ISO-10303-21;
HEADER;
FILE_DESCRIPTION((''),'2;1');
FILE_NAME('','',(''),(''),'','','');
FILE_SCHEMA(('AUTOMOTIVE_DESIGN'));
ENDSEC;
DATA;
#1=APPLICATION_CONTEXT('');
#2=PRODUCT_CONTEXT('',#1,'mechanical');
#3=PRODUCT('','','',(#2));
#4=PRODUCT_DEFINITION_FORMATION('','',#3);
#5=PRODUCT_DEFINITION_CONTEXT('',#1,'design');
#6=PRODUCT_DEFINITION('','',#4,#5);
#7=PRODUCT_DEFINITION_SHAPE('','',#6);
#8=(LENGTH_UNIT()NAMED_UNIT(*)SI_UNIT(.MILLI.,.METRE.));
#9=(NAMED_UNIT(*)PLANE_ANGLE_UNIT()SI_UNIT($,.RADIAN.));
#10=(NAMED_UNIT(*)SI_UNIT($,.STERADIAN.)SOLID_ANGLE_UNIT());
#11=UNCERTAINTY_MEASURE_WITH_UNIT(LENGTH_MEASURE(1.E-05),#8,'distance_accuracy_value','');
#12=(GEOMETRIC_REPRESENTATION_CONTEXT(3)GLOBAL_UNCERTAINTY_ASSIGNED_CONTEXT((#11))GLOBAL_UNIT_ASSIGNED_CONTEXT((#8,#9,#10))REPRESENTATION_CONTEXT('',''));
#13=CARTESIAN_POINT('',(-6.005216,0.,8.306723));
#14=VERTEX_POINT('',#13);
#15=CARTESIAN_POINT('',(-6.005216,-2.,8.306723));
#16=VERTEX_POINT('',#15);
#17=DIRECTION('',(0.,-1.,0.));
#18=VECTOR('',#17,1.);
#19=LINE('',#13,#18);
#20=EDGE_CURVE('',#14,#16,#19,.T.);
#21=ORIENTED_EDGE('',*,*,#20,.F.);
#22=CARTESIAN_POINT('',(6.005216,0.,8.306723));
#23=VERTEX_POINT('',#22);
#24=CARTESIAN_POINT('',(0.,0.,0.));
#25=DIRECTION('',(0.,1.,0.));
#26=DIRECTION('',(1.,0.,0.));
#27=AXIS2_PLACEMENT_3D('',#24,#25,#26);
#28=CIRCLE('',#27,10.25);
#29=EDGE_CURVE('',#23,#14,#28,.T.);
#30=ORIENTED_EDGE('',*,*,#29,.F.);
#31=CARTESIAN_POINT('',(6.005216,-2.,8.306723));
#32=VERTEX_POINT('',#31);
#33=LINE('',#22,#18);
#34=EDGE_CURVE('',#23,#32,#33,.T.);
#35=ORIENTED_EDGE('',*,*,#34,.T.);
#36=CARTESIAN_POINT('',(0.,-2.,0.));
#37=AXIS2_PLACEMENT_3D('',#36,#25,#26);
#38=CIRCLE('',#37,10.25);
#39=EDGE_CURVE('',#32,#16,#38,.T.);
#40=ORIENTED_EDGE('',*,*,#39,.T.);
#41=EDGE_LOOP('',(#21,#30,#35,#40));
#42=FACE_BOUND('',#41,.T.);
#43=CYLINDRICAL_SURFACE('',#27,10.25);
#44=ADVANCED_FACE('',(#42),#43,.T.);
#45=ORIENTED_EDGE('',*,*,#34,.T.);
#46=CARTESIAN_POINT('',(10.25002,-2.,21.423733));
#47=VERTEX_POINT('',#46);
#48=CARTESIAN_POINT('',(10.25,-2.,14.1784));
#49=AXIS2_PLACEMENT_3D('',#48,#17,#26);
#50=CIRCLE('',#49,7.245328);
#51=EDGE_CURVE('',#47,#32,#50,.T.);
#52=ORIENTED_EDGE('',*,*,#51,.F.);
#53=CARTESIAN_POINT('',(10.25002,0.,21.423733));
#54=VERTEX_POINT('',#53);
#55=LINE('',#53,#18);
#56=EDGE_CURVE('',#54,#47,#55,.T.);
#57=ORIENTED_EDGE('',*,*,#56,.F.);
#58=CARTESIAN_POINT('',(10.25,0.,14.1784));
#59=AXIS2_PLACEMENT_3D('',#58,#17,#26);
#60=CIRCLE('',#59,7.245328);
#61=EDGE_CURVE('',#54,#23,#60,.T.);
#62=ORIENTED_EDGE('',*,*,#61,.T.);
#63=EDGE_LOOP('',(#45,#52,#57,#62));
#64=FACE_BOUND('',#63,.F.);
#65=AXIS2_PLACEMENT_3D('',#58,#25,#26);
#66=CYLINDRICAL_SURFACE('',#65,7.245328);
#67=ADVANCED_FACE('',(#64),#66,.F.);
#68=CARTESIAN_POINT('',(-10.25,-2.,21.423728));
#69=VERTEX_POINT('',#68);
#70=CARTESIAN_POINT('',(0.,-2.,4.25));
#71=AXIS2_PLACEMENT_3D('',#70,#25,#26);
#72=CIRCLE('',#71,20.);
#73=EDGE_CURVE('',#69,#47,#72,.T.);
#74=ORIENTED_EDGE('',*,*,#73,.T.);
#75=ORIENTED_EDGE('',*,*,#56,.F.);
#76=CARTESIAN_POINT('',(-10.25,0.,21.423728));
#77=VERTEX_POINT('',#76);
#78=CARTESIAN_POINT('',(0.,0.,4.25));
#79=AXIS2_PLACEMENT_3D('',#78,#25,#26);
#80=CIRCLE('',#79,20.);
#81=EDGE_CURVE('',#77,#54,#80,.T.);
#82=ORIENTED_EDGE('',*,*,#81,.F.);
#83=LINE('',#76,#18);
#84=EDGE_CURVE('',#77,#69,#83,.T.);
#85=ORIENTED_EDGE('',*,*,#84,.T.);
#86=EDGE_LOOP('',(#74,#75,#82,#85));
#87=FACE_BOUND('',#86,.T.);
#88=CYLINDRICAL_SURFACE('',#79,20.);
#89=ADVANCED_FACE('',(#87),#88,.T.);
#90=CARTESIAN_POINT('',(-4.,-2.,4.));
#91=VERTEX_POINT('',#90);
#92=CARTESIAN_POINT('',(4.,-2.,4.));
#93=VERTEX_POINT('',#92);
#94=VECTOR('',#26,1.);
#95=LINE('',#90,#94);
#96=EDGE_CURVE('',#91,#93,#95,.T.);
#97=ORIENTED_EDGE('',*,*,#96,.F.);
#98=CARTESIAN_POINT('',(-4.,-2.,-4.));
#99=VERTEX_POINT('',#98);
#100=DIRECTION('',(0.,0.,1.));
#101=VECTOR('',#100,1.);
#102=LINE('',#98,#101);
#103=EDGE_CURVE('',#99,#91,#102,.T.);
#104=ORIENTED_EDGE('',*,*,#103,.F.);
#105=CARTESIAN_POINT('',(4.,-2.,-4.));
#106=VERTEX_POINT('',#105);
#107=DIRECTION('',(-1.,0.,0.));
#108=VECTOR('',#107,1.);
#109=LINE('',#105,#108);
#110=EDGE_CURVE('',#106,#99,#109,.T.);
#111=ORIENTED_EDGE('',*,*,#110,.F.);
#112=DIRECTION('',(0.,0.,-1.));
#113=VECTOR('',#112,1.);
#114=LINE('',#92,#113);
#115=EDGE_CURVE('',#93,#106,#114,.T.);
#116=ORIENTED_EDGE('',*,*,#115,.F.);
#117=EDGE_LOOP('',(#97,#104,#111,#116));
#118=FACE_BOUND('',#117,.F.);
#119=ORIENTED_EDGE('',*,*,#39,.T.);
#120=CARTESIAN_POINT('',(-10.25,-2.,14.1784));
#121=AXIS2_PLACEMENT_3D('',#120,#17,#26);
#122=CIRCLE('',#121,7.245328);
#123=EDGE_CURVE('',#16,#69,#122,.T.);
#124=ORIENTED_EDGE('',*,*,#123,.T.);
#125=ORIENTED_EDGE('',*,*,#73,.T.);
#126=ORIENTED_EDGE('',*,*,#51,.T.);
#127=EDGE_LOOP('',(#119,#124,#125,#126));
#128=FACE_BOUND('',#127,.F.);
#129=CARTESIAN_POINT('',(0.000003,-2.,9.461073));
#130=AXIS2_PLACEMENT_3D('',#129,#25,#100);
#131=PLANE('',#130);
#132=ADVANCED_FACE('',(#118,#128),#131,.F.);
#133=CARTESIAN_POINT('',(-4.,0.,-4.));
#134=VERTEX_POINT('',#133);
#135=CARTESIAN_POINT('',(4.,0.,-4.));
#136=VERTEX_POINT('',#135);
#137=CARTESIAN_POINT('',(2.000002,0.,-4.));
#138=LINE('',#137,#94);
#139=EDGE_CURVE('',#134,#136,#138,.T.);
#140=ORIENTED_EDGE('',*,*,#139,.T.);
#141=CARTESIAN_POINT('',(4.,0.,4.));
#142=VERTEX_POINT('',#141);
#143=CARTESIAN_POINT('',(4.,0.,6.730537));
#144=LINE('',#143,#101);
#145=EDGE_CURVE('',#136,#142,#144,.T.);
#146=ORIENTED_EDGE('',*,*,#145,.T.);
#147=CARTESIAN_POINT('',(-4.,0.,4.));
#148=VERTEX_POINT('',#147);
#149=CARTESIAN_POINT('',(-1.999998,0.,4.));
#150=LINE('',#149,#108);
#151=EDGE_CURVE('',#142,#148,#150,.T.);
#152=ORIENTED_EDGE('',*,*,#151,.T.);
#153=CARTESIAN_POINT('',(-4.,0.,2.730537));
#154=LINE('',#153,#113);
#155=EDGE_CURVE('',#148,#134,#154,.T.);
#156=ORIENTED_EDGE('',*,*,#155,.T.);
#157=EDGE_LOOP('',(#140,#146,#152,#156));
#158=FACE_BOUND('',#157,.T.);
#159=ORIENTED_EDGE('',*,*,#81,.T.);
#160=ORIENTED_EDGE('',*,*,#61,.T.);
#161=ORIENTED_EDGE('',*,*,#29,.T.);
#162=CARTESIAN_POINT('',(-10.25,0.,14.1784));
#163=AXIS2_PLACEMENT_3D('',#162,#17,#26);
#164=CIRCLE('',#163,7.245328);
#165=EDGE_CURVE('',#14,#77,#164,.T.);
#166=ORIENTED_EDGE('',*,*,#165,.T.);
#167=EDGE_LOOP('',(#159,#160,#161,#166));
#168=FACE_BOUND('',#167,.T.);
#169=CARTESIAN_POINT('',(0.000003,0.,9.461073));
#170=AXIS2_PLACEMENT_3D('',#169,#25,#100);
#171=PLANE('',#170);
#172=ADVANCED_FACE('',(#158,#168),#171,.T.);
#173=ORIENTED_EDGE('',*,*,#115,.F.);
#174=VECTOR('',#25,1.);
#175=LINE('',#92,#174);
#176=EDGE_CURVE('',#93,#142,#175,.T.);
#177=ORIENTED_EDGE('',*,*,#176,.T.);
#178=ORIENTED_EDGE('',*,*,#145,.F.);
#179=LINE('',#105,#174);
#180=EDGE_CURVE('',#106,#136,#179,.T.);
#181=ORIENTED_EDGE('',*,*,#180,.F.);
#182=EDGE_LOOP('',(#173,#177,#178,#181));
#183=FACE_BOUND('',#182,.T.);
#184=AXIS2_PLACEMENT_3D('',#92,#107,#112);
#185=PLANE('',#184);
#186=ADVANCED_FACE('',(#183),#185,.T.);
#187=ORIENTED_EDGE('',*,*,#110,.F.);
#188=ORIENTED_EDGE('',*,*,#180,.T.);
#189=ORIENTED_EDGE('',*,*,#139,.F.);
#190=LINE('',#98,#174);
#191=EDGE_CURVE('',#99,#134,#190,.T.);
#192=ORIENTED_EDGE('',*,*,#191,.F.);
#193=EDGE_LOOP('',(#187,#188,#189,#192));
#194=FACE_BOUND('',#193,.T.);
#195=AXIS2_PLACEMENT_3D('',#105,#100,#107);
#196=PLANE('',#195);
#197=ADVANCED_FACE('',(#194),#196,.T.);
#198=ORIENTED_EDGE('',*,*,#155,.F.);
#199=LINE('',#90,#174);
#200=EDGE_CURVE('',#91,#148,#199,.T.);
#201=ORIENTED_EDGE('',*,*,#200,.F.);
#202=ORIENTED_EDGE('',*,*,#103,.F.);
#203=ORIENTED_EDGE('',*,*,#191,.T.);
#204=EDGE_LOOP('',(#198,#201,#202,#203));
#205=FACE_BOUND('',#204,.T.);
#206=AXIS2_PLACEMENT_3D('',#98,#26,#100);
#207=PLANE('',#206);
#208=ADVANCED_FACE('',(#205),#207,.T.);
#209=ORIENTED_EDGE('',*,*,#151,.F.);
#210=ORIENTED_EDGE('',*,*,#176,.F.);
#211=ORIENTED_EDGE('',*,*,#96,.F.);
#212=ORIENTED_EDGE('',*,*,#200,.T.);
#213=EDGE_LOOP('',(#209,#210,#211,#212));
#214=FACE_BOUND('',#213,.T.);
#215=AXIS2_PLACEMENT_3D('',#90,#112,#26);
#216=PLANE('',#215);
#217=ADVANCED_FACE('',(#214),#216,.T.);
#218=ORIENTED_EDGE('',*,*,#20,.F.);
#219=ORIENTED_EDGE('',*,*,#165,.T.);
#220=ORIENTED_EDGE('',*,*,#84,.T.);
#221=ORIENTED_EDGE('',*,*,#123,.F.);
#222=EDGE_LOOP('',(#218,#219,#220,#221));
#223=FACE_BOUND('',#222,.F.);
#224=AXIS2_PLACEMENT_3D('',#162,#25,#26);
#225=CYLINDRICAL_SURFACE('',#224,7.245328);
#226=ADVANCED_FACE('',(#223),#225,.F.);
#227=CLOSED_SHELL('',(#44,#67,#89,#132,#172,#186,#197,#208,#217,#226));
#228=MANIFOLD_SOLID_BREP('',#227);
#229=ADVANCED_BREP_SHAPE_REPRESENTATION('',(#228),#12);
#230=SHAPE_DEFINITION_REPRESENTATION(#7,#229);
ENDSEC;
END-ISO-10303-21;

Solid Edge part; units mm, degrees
sketch "Sketch1" plane through (0, 0, 0) normal (0, -1, 0) x (1, 0, 0)
  arc A0 (-6.0052, 8.3067) -> (-10.25, 21.4237) centre (-10.25, 14.1784) ccw
  arc A1 (-10.25, 21.4237) -> (10.25, 21.4237) centre (0, 4.25) cw
  arc A2 (10.25, 21.4237) -> (6.0052, 8.3067) centre (10.25, 14.1784) ccw
  arc A3 (6.0052, 8.3067) -> (-6.0052, 8.3067) centre (0, 0) cw
  dimension "D1" = 6.0052
extrude "Protrusion1" add sketch "Sketch1" along normal blind 2
sketch "Sketch2" plane through (0, -2, 7) normal (0, -1, 0) x (1, 0, 0)
  line L0 (-4, -3) -> (4, -3)
  line L1 (4, -3) -> (4, -11)
  line L2 (4, -11) -> (-4, -11)
  line L3 (-4, -11) -> (-4, -3)
  dimension "D1" = 8
  dimension "D2" = 8
extrude "Cutout1" cut sketch "Sketch2" against normal through all
